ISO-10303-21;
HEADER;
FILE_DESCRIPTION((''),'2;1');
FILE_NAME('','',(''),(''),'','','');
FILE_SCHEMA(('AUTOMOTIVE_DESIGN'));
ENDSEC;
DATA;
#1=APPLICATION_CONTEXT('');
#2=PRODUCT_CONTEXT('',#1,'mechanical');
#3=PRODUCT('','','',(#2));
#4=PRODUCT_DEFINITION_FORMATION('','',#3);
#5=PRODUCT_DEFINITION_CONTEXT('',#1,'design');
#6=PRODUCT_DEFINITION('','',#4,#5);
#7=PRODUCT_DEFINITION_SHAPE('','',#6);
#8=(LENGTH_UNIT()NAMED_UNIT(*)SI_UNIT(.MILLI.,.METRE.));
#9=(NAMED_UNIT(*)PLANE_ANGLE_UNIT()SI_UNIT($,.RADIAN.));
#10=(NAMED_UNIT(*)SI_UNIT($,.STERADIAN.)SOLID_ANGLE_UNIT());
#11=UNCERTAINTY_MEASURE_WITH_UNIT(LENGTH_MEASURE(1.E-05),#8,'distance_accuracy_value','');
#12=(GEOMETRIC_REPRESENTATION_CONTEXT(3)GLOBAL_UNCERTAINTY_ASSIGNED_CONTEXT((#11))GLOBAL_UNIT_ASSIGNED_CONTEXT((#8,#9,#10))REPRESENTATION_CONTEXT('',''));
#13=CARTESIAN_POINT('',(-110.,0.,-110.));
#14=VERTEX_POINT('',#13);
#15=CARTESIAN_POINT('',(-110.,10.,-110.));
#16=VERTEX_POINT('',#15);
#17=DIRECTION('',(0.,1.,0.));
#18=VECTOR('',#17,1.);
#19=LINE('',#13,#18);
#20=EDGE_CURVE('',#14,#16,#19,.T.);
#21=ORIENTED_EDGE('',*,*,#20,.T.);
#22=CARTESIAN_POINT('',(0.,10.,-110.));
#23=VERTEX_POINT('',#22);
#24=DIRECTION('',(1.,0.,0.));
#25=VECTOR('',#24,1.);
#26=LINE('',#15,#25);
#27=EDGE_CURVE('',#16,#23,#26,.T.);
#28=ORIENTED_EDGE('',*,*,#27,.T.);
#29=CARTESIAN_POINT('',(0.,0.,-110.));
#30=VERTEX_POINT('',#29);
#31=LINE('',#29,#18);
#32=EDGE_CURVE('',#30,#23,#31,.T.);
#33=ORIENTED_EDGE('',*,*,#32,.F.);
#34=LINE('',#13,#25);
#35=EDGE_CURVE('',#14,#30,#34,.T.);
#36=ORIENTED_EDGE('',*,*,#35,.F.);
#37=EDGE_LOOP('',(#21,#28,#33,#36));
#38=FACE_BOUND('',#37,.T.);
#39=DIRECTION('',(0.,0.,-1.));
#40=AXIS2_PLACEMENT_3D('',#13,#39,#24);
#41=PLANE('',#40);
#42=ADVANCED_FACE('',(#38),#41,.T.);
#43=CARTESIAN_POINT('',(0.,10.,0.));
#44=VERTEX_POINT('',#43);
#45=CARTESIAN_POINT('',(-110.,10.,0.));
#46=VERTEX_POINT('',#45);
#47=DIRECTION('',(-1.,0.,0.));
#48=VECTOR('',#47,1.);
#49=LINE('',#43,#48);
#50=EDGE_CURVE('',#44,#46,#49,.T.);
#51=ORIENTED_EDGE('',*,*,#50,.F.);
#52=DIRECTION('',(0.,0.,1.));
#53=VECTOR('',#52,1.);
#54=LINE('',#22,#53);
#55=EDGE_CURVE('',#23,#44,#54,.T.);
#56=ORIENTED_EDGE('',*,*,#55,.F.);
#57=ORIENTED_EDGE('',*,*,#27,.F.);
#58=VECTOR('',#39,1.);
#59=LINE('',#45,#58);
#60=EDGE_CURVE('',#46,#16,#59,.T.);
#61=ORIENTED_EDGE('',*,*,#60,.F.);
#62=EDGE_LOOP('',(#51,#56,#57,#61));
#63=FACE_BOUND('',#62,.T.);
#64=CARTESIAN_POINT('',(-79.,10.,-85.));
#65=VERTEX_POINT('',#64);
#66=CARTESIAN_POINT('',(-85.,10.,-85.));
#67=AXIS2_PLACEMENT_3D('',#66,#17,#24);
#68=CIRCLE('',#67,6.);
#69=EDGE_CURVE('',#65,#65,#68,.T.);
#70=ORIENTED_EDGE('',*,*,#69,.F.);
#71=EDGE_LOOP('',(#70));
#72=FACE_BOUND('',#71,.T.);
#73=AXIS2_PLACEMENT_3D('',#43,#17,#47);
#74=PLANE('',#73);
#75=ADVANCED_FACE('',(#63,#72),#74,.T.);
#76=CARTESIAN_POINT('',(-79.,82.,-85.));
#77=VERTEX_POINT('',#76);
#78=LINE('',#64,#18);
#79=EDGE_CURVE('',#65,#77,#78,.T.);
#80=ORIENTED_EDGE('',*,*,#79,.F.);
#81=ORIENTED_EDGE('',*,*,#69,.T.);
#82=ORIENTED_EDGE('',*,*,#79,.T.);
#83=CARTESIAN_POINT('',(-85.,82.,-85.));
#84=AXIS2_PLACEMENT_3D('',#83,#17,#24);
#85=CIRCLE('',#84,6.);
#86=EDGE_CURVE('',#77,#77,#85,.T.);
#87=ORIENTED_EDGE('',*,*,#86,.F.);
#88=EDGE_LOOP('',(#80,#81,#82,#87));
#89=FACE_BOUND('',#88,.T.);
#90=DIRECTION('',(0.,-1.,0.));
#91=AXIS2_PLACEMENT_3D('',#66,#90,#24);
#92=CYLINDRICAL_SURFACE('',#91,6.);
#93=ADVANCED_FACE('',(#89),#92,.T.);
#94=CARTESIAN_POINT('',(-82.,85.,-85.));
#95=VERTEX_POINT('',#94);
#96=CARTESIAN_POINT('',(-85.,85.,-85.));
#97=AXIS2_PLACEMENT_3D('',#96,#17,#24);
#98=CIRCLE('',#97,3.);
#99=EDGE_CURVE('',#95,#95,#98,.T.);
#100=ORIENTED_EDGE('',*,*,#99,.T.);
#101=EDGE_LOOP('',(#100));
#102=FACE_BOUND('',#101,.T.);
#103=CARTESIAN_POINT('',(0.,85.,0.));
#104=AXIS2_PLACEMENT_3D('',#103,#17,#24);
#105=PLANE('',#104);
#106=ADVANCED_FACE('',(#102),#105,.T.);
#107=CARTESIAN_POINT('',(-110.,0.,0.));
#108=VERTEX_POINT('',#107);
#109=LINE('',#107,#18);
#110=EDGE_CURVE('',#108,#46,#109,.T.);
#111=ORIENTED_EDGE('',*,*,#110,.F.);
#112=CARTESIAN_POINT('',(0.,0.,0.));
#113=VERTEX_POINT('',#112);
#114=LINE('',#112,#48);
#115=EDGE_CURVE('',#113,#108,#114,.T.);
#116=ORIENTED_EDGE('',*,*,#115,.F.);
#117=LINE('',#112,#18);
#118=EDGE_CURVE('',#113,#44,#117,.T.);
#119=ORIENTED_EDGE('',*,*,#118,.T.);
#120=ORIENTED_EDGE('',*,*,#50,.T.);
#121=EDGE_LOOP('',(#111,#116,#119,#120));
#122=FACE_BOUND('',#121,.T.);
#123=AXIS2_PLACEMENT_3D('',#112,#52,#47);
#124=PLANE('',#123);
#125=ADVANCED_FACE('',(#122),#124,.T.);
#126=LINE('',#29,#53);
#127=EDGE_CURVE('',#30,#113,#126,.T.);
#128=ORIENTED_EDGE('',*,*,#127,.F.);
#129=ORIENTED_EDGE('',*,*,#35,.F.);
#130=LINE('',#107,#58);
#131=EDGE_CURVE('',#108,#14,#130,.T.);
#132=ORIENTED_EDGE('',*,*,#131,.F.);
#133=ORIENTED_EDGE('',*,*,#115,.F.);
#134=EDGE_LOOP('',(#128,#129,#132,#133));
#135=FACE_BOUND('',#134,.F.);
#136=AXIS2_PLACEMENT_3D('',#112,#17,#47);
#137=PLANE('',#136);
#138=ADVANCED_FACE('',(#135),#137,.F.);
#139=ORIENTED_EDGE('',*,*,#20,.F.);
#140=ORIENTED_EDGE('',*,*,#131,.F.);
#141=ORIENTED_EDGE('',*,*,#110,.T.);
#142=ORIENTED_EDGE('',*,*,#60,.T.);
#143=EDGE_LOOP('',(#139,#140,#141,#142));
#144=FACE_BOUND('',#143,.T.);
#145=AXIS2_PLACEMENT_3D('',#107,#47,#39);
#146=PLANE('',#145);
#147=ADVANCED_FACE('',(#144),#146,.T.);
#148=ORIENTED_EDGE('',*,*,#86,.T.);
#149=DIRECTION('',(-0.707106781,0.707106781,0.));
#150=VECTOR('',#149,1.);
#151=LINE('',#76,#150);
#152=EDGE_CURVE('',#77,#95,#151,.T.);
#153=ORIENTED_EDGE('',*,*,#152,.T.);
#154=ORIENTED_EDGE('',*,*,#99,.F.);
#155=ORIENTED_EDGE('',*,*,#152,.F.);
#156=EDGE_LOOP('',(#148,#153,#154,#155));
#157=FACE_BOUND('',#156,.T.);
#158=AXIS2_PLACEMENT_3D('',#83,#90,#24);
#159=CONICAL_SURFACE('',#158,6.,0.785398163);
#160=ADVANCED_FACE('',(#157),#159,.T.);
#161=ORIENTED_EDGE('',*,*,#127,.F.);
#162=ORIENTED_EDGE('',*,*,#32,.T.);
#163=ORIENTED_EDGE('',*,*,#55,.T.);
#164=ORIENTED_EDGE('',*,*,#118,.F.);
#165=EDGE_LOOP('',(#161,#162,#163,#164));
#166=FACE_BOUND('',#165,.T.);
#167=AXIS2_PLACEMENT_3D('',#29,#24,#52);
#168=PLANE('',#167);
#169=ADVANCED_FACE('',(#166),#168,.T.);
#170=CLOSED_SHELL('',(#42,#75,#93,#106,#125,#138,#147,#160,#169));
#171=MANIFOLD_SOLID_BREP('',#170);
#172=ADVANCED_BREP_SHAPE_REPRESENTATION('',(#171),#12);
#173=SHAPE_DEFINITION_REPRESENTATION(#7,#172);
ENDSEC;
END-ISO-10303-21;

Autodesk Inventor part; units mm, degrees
ref_plane "YZ Plane" through (0, 0, 0) normal (1, 0, 0) x (0, 1, 0)
ref_plane "XZ Plane" through (0, 0, 0) normal (0, 1, 0) x (-1, 0, 0)
ref_plane "XY Plane" through (0, 0, 0) normal (0, 0, 1) x (1, 0, 0)
sketch "Sketch1" plane through (0, 0, 0) normal (0, 1, 0) x (-1, 0, 0)
  line L0 (0, 0) -> (110, 0)
  line L1 (110, 0) -> (110, -110)
  line L2 (110, -110) -> (0, -110)
  line L3 (0, -110) -> (0, 0)
  dimension "d0" = 110
  dimension "d1" = 110
extrude "Extrusion1" add sketch "Sketch1" along normal blind 10
sketch "Sketch2" plane through (0, 10, 0) normal (0, 1, 0) x (1, 0, 0)
  circle A0 centre (-85, 85) radius 6
  line L0 (-110, 110) -> (-110, 0) projected
  line L1 (0, 110) -> (-110, 110) projected
  line L2 (0, 0) -> (0, 110) projected
  line L3 (-110, 0) -> (0, 0) projected
  dimension "d11" = 12
  dimension "d12" = 25
  dimension "d13" = 25
extrude "Extrusion3" add sketch "Sketch2" along normal blind 75 contours A0
chamfer "Chamfer1" distance 3 angle 45 1 edges at (-91, 85, -85)
properties part number "base"
